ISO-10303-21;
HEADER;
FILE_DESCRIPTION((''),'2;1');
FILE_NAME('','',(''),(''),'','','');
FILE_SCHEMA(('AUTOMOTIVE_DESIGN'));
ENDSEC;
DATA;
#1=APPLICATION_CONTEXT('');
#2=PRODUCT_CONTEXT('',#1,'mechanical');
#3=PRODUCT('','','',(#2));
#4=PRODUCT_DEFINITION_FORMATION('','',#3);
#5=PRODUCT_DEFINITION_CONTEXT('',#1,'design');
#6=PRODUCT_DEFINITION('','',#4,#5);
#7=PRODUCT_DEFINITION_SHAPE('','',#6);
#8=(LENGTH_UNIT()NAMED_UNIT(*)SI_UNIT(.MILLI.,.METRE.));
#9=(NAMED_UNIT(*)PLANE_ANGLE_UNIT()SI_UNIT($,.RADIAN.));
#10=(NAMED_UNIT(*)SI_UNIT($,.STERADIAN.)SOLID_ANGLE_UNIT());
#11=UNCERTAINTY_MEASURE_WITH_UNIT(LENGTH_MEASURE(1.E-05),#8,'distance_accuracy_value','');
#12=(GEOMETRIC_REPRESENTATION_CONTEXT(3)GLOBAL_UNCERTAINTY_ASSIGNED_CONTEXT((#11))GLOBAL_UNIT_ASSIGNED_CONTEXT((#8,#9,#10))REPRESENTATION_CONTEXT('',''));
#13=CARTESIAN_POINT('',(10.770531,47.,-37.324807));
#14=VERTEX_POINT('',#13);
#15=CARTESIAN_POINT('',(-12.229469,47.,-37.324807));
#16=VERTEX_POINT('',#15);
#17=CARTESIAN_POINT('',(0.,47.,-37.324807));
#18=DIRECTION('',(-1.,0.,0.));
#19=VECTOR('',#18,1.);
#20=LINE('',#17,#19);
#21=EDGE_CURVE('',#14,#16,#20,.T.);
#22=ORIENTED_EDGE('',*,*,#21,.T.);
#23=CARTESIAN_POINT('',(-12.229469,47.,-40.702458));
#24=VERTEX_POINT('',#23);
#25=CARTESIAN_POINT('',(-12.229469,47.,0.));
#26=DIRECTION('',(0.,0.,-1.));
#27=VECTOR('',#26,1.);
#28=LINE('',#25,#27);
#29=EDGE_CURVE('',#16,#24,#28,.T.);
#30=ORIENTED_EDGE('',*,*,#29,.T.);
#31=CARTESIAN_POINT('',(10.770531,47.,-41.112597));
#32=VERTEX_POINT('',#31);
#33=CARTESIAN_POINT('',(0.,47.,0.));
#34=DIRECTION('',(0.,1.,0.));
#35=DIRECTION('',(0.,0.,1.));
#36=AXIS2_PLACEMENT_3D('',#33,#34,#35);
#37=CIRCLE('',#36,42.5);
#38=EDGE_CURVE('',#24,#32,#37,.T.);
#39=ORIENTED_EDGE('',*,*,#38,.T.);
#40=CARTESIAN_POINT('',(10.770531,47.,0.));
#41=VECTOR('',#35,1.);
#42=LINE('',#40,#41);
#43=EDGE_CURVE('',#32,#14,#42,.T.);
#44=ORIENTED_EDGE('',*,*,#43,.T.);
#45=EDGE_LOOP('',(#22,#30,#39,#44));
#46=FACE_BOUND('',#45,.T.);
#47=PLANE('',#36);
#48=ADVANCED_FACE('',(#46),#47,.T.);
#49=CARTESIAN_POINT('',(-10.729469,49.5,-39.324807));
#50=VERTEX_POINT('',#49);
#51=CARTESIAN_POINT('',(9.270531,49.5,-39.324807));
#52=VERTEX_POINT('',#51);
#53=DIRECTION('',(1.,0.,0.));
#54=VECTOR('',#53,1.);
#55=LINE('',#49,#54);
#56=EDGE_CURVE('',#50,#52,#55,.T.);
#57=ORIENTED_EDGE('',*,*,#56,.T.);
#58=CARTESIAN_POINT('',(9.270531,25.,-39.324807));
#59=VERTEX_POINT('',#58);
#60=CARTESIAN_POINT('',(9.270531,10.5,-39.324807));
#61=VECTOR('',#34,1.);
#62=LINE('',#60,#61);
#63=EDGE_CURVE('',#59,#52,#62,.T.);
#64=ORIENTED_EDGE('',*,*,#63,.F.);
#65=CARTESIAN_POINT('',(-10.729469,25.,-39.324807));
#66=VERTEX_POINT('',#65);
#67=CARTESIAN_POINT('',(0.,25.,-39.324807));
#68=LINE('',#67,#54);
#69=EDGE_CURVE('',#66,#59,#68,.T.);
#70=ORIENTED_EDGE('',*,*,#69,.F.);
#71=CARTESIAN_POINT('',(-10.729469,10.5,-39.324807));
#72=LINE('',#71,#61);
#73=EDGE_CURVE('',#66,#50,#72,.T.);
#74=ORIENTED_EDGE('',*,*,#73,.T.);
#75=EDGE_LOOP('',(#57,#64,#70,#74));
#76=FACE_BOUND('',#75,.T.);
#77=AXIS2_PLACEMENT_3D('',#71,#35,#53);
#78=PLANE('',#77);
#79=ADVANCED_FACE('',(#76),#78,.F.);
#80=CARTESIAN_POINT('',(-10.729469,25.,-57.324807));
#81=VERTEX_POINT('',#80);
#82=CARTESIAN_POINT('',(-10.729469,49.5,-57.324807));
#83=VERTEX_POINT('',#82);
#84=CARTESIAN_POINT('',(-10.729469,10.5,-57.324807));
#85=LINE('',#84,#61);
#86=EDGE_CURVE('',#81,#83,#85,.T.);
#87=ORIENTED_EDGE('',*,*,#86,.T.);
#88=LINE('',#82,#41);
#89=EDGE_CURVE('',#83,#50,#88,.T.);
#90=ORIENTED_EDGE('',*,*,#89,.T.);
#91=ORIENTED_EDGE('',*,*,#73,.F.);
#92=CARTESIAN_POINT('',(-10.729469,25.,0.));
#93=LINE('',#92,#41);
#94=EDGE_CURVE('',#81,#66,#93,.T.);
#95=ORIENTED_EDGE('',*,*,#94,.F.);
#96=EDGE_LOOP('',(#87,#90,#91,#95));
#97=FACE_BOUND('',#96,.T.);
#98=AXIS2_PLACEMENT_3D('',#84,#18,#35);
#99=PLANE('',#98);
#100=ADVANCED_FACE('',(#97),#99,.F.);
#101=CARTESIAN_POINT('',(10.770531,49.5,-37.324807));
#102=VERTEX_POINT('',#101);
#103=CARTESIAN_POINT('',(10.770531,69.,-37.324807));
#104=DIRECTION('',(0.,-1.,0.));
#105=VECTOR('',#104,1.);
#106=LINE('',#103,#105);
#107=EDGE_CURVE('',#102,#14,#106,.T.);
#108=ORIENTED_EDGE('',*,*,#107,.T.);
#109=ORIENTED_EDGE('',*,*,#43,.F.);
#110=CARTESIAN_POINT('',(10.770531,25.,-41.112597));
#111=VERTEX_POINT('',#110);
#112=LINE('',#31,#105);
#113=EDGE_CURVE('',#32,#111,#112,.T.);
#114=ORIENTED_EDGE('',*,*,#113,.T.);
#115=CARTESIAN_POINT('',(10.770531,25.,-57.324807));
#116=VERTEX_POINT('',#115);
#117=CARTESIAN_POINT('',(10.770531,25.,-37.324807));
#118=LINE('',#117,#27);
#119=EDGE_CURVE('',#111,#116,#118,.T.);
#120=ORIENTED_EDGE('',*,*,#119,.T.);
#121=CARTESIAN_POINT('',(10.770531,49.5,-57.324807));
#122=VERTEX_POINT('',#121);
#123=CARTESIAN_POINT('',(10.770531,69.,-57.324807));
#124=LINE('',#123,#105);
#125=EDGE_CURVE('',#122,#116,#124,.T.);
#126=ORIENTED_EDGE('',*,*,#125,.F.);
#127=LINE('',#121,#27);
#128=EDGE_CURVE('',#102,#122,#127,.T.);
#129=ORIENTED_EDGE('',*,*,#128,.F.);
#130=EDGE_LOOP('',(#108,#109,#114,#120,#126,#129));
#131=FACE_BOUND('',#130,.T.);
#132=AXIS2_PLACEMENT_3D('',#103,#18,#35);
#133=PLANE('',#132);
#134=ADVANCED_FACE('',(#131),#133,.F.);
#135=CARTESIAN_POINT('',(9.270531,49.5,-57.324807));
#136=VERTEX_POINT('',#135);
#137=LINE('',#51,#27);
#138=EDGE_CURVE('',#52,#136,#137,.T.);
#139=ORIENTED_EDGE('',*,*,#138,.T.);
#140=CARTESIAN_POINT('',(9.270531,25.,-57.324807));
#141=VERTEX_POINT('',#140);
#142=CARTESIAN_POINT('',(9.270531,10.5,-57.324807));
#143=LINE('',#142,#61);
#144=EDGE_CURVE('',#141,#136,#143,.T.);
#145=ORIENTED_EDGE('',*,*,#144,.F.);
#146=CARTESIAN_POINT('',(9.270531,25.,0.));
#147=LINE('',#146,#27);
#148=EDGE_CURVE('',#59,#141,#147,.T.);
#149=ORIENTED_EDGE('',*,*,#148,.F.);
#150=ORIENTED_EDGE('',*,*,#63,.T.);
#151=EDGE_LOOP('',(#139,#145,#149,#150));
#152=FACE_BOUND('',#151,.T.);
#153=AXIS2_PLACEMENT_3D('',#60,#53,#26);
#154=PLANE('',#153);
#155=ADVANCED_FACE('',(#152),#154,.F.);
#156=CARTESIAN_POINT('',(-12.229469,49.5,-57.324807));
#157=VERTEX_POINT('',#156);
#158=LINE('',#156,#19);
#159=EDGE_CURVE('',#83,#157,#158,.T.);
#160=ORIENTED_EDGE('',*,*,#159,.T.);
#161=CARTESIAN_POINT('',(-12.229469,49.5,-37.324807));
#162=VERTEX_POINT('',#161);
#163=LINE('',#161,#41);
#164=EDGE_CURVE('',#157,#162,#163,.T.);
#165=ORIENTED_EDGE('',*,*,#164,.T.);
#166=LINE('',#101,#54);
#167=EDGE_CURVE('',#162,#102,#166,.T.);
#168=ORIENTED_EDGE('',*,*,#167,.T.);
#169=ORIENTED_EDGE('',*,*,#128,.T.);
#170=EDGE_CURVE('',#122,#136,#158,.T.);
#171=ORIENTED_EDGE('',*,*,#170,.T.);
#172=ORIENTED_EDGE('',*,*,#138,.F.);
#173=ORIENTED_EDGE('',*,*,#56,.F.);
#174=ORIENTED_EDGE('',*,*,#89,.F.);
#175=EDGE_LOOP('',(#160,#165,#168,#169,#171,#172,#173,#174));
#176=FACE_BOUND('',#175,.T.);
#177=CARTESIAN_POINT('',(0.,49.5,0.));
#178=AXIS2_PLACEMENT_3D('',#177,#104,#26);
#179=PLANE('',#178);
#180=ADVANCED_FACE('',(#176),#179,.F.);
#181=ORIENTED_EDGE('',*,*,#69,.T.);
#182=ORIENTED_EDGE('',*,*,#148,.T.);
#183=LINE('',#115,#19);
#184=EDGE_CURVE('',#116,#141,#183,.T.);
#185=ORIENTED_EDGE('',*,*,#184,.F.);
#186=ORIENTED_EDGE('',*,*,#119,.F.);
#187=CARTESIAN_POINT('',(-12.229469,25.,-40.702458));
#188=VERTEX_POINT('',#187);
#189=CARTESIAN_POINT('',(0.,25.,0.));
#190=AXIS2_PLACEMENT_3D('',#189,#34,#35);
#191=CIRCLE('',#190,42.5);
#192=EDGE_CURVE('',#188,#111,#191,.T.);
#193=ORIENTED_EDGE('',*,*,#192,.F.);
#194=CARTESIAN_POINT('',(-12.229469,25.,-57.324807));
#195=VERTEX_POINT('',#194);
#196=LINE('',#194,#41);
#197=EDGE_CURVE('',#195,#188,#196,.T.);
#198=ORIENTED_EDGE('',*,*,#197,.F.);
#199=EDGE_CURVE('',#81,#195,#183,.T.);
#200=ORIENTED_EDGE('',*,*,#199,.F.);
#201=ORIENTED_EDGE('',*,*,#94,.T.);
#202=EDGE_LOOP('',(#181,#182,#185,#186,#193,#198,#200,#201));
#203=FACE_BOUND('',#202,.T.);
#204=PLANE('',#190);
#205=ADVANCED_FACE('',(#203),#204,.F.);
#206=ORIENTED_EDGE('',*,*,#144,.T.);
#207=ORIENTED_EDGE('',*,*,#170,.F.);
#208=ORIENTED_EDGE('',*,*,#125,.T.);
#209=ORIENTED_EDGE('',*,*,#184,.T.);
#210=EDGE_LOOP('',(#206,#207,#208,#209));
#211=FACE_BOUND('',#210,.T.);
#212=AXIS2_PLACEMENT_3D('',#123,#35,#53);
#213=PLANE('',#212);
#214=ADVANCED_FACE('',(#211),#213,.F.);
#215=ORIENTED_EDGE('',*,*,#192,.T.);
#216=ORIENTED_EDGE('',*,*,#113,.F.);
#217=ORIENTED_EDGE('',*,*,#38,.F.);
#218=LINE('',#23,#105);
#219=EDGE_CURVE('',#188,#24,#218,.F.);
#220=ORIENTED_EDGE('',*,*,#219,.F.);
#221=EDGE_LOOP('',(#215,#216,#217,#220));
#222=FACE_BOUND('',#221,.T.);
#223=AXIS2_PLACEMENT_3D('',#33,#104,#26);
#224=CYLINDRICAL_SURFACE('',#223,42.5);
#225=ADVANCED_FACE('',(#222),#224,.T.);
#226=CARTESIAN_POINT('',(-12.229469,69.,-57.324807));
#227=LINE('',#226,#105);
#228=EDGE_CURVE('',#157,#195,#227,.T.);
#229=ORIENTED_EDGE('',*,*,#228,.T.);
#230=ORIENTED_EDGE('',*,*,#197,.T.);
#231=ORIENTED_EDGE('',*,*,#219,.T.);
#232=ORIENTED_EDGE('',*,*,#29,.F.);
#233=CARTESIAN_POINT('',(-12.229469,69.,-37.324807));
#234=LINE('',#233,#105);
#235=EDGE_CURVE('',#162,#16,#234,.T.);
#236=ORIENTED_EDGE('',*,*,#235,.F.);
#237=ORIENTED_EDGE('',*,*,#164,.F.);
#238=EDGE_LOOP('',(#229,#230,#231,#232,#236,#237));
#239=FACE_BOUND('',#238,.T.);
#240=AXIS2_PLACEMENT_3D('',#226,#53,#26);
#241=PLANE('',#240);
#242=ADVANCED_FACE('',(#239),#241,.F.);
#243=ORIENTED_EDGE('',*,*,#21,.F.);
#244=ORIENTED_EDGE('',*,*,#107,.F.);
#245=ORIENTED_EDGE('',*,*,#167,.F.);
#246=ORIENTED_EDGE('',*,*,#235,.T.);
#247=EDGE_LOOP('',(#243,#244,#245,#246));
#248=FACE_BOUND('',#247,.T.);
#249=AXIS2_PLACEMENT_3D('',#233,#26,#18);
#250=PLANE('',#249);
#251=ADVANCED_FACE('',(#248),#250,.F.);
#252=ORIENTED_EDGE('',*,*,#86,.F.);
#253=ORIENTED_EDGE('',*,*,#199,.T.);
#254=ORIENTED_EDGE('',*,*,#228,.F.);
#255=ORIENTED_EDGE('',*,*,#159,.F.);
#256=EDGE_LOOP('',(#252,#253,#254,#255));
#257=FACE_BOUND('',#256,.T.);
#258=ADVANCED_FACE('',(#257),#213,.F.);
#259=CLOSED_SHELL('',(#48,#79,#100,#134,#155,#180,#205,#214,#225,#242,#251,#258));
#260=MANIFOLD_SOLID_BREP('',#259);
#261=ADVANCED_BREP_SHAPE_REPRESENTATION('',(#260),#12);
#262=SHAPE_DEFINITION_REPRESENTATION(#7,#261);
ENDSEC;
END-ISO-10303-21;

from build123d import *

# Parameters (mm, degrees)
BOSS_EXTRUDE5_OUTLINE_R = 42.5
BOSS_EXTRUDE5_DEPTH     = 22
SKETCH11_W              = 23
SKETCH11_H              = 20
BOSS_EXTRUDE6_DEPTH     = 22
SKETCH12_W              = 23
SKETCH12_H              = 20
CUT_EXTRUDE1_DEPTH      = 19.5
SKETCH13_W              = 20
SKETCH13_H              = 18
CUT_EXTRUDE2_DEPTH      = 39


# Read off the part's stored shape, not the designer's step: Boss-Extrude5
with BuildPart() as part:
    # Boss-Extrude5 outline → Boss-Extrude5 (new body)
    with BuildSketch(Plane(origin=(0, 25, 0), x_dir=(1, 0, 0), z_dir=(0, 1, 0))):
        Circle(BOSS_EXTRUDE5_OUTLINE_R)
    extrude(amount=BOSS_EXTRUDE5_DEPTH)

    # Sketch11 → Boss-Extrude6 (add, symmetric)
    with BuildSketch(Plane(origin=(0, 47, 0), x_dir=(1, 0, 0), z_dir=(0, 1, 0))):
        with Locations((-0.729469309, 47.32480688)):
            Rectangle(SKETCH11_W, SKETCH11_H)
    extrude(amount=BOSS_EXTRUDE6_DEPTH, both=True)

    # Sketch12 → Cut-Extrude1 (cut, symmetric)
    with BuildSketch(Plane(origin=(0, 69, 0), x_dir=(1, 0, 0), z_dir=(0, 1, 0))):
        with Locations((-0.729469309, 47.32480688)):
            Rectangle(SKETCH12_W, SKETCH12_H)
    extrude(amount=CUT_EXTRUDE1_DEPTH, both=True, mode=Mode.SUBTRACT)

    # Sketch13 → Cut-Extrude2 (cut)
    with BuildSketch(Plane(origin=(0, 49.5, 0), x_dir=(1, 0, 0), z_dir=(0, 1, 0))):
        with Locations((-0.729469309, 48.32480688)):
            Rectangle(SKETCH13_W, SKETCH13_H)
    extrude(amount=-CUT_EXTRUDE2_DEPTH, mode=Mode.SUBTRACT)


solid = part.part
